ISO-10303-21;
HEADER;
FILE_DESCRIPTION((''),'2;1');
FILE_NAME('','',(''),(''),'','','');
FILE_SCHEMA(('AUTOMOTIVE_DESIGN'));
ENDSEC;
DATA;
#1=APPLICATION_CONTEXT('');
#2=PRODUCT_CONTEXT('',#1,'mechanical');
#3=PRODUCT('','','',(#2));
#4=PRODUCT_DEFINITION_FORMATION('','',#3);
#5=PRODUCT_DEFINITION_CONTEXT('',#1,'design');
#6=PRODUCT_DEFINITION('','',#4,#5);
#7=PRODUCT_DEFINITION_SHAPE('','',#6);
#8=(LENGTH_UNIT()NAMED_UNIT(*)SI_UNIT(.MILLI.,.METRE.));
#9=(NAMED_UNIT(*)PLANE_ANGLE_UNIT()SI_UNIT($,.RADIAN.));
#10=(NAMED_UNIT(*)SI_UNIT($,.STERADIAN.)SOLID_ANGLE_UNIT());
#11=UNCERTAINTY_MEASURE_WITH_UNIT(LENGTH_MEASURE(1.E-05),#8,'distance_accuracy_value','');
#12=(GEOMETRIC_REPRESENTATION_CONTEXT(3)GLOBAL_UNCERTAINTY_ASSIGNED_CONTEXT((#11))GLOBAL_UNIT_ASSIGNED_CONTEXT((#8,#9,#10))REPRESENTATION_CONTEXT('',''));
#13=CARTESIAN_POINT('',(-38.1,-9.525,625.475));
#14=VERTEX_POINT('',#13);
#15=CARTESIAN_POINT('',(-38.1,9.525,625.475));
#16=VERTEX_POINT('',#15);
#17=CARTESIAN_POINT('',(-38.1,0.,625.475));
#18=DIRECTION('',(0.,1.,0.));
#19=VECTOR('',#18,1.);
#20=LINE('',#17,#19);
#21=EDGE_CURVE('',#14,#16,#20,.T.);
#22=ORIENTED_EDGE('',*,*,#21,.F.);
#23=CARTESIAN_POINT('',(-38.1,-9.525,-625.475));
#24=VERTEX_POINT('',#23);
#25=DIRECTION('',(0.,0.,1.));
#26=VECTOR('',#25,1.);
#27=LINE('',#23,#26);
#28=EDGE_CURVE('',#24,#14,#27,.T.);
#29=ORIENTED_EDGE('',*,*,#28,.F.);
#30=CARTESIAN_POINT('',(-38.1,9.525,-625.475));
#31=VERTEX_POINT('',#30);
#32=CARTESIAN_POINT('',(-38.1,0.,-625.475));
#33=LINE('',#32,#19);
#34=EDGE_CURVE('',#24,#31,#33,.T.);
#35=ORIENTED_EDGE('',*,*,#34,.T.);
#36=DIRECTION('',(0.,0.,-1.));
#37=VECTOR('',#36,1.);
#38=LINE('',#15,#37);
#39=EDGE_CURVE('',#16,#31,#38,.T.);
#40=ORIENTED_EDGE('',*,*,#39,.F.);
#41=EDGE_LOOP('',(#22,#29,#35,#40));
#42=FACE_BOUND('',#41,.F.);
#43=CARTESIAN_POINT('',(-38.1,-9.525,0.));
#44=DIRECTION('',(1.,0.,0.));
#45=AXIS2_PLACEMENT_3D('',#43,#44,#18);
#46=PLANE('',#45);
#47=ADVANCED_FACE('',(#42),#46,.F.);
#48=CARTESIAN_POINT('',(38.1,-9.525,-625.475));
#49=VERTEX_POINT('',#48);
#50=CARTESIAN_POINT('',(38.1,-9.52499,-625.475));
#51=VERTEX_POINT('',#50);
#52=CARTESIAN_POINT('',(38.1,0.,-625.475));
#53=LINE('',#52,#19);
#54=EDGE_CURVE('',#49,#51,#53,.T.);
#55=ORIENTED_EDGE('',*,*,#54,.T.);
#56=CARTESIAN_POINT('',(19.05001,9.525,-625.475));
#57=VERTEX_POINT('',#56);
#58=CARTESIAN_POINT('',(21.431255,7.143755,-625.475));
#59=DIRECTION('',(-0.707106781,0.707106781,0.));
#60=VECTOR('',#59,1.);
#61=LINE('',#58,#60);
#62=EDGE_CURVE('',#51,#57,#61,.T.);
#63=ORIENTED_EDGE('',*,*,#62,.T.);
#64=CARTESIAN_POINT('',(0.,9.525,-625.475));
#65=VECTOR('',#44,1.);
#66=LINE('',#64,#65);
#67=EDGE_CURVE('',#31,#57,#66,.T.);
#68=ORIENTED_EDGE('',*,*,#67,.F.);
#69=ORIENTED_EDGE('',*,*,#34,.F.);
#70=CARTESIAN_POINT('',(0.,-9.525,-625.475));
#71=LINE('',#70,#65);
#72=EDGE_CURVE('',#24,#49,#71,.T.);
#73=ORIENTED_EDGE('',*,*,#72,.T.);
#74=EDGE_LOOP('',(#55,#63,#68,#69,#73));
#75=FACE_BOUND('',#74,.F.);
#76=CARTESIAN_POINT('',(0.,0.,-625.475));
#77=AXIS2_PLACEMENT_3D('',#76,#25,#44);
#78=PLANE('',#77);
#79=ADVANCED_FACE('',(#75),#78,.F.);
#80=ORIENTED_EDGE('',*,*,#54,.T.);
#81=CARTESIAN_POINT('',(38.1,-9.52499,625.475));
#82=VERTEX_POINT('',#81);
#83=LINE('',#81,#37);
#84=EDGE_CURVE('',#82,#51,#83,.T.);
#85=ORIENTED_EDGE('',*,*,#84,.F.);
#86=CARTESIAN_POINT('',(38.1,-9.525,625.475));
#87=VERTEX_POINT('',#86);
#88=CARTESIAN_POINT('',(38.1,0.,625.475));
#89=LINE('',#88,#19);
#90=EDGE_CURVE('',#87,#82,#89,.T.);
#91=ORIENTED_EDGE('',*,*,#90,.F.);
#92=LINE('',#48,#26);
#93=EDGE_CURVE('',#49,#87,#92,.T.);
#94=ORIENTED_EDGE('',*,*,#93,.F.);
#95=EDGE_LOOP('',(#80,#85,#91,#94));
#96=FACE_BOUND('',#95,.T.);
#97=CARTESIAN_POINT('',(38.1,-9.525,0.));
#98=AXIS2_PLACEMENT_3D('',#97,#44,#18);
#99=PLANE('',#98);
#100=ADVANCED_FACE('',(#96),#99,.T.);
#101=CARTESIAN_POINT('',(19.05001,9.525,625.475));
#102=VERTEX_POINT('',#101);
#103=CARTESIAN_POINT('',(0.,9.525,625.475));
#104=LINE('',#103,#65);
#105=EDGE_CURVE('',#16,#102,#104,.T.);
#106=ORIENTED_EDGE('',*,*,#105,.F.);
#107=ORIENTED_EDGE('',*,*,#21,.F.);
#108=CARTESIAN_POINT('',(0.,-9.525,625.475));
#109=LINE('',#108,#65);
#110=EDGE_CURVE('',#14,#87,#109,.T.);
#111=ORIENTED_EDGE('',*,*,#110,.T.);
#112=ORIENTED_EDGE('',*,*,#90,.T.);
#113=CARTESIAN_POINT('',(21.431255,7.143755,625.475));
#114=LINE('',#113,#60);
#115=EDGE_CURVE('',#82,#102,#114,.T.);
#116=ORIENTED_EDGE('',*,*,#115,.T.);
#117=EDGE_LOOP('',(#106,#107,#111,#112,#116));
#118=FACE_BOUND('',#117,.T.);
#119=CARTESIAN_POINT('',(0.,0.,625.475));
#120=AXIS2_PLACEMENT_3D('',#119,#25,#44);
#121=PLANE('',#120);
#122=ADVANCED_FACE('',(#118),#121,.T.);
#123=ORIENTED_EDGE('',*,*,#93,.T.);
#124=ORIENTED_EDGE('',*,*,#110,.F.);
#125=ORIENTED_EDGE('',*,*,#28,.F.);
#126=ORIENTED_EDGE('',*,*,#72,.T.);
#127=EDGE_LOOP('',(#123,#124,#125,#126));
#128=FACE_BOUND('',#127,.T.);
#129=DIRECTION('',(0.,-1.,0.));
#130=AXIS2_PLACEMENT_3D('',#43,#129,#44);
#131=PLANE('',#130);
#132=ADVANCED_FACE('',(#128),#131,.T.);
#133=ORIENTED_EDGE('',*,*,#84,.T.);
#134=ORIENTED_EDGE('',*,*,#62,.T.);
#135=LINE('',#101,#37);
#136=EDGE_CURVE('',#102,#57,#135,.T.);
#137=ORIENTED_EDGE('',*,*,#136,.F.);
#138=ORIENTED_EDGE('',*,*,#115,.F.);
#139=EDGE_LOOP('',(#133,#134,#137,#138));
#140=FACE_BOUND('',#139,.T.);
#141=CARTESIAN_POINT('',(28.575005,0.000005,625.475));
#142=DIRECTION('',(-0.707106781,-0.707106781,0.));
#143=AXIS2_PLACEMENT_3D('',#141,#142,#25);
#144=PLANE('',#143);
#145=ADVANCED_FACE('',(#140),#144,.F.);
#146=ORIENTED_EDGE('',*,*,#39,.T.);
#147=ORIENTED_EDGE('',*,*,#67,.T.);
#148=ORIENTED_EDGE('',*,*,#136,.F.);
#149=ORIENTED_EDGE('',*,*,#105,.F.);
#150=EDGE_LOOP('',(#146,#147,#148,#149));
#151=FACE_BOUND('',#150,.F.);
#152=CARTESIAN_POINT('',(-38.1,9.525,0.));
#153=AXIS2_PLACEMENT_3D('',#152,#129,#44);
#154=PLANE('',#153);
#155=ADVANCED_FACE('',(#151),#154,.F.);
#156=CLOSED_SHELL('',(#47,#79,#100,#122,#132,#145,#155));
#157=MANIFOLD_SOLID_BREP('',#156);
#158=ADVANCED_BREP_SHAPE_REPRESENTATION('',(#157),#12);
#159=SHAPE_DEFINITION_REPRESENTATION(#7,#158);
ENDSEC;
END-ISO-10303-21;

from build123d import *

# Parameters (mm, degrees)
F0_W     = 76.2
F0_H     = 19.05
F1_DEPTH = 625.475
F2_SIZE2 = 19.04999
F2_SIZE  = 19.04999


# Not quite as in the source:
# - a fillet or chamfer is up to 0.001 mm smaller than in the source, because OpenCascade refuses the exact size


with BuildPart() as f1:
    # F0 (on Top) → F1 (new body, symmetric)
    with BuildSketch(Plane.XY):
        Rectangle(F0_W, F0_H)
    extrude(amount=F1_DEPTH, both=True)

    # F2 (size 19.05 and 19.05 in the source; OpenCascade refuses exactly that, so slightly less here)
    f2_edges = [f1.edges().sort_by_distance(p)[0] for p in [
        (38.1, 9.525, 0),
    ]]
    chamfer(f2_edges, length=F2_SIZE, length2=F2_SIZE2)


solid = f1.part
